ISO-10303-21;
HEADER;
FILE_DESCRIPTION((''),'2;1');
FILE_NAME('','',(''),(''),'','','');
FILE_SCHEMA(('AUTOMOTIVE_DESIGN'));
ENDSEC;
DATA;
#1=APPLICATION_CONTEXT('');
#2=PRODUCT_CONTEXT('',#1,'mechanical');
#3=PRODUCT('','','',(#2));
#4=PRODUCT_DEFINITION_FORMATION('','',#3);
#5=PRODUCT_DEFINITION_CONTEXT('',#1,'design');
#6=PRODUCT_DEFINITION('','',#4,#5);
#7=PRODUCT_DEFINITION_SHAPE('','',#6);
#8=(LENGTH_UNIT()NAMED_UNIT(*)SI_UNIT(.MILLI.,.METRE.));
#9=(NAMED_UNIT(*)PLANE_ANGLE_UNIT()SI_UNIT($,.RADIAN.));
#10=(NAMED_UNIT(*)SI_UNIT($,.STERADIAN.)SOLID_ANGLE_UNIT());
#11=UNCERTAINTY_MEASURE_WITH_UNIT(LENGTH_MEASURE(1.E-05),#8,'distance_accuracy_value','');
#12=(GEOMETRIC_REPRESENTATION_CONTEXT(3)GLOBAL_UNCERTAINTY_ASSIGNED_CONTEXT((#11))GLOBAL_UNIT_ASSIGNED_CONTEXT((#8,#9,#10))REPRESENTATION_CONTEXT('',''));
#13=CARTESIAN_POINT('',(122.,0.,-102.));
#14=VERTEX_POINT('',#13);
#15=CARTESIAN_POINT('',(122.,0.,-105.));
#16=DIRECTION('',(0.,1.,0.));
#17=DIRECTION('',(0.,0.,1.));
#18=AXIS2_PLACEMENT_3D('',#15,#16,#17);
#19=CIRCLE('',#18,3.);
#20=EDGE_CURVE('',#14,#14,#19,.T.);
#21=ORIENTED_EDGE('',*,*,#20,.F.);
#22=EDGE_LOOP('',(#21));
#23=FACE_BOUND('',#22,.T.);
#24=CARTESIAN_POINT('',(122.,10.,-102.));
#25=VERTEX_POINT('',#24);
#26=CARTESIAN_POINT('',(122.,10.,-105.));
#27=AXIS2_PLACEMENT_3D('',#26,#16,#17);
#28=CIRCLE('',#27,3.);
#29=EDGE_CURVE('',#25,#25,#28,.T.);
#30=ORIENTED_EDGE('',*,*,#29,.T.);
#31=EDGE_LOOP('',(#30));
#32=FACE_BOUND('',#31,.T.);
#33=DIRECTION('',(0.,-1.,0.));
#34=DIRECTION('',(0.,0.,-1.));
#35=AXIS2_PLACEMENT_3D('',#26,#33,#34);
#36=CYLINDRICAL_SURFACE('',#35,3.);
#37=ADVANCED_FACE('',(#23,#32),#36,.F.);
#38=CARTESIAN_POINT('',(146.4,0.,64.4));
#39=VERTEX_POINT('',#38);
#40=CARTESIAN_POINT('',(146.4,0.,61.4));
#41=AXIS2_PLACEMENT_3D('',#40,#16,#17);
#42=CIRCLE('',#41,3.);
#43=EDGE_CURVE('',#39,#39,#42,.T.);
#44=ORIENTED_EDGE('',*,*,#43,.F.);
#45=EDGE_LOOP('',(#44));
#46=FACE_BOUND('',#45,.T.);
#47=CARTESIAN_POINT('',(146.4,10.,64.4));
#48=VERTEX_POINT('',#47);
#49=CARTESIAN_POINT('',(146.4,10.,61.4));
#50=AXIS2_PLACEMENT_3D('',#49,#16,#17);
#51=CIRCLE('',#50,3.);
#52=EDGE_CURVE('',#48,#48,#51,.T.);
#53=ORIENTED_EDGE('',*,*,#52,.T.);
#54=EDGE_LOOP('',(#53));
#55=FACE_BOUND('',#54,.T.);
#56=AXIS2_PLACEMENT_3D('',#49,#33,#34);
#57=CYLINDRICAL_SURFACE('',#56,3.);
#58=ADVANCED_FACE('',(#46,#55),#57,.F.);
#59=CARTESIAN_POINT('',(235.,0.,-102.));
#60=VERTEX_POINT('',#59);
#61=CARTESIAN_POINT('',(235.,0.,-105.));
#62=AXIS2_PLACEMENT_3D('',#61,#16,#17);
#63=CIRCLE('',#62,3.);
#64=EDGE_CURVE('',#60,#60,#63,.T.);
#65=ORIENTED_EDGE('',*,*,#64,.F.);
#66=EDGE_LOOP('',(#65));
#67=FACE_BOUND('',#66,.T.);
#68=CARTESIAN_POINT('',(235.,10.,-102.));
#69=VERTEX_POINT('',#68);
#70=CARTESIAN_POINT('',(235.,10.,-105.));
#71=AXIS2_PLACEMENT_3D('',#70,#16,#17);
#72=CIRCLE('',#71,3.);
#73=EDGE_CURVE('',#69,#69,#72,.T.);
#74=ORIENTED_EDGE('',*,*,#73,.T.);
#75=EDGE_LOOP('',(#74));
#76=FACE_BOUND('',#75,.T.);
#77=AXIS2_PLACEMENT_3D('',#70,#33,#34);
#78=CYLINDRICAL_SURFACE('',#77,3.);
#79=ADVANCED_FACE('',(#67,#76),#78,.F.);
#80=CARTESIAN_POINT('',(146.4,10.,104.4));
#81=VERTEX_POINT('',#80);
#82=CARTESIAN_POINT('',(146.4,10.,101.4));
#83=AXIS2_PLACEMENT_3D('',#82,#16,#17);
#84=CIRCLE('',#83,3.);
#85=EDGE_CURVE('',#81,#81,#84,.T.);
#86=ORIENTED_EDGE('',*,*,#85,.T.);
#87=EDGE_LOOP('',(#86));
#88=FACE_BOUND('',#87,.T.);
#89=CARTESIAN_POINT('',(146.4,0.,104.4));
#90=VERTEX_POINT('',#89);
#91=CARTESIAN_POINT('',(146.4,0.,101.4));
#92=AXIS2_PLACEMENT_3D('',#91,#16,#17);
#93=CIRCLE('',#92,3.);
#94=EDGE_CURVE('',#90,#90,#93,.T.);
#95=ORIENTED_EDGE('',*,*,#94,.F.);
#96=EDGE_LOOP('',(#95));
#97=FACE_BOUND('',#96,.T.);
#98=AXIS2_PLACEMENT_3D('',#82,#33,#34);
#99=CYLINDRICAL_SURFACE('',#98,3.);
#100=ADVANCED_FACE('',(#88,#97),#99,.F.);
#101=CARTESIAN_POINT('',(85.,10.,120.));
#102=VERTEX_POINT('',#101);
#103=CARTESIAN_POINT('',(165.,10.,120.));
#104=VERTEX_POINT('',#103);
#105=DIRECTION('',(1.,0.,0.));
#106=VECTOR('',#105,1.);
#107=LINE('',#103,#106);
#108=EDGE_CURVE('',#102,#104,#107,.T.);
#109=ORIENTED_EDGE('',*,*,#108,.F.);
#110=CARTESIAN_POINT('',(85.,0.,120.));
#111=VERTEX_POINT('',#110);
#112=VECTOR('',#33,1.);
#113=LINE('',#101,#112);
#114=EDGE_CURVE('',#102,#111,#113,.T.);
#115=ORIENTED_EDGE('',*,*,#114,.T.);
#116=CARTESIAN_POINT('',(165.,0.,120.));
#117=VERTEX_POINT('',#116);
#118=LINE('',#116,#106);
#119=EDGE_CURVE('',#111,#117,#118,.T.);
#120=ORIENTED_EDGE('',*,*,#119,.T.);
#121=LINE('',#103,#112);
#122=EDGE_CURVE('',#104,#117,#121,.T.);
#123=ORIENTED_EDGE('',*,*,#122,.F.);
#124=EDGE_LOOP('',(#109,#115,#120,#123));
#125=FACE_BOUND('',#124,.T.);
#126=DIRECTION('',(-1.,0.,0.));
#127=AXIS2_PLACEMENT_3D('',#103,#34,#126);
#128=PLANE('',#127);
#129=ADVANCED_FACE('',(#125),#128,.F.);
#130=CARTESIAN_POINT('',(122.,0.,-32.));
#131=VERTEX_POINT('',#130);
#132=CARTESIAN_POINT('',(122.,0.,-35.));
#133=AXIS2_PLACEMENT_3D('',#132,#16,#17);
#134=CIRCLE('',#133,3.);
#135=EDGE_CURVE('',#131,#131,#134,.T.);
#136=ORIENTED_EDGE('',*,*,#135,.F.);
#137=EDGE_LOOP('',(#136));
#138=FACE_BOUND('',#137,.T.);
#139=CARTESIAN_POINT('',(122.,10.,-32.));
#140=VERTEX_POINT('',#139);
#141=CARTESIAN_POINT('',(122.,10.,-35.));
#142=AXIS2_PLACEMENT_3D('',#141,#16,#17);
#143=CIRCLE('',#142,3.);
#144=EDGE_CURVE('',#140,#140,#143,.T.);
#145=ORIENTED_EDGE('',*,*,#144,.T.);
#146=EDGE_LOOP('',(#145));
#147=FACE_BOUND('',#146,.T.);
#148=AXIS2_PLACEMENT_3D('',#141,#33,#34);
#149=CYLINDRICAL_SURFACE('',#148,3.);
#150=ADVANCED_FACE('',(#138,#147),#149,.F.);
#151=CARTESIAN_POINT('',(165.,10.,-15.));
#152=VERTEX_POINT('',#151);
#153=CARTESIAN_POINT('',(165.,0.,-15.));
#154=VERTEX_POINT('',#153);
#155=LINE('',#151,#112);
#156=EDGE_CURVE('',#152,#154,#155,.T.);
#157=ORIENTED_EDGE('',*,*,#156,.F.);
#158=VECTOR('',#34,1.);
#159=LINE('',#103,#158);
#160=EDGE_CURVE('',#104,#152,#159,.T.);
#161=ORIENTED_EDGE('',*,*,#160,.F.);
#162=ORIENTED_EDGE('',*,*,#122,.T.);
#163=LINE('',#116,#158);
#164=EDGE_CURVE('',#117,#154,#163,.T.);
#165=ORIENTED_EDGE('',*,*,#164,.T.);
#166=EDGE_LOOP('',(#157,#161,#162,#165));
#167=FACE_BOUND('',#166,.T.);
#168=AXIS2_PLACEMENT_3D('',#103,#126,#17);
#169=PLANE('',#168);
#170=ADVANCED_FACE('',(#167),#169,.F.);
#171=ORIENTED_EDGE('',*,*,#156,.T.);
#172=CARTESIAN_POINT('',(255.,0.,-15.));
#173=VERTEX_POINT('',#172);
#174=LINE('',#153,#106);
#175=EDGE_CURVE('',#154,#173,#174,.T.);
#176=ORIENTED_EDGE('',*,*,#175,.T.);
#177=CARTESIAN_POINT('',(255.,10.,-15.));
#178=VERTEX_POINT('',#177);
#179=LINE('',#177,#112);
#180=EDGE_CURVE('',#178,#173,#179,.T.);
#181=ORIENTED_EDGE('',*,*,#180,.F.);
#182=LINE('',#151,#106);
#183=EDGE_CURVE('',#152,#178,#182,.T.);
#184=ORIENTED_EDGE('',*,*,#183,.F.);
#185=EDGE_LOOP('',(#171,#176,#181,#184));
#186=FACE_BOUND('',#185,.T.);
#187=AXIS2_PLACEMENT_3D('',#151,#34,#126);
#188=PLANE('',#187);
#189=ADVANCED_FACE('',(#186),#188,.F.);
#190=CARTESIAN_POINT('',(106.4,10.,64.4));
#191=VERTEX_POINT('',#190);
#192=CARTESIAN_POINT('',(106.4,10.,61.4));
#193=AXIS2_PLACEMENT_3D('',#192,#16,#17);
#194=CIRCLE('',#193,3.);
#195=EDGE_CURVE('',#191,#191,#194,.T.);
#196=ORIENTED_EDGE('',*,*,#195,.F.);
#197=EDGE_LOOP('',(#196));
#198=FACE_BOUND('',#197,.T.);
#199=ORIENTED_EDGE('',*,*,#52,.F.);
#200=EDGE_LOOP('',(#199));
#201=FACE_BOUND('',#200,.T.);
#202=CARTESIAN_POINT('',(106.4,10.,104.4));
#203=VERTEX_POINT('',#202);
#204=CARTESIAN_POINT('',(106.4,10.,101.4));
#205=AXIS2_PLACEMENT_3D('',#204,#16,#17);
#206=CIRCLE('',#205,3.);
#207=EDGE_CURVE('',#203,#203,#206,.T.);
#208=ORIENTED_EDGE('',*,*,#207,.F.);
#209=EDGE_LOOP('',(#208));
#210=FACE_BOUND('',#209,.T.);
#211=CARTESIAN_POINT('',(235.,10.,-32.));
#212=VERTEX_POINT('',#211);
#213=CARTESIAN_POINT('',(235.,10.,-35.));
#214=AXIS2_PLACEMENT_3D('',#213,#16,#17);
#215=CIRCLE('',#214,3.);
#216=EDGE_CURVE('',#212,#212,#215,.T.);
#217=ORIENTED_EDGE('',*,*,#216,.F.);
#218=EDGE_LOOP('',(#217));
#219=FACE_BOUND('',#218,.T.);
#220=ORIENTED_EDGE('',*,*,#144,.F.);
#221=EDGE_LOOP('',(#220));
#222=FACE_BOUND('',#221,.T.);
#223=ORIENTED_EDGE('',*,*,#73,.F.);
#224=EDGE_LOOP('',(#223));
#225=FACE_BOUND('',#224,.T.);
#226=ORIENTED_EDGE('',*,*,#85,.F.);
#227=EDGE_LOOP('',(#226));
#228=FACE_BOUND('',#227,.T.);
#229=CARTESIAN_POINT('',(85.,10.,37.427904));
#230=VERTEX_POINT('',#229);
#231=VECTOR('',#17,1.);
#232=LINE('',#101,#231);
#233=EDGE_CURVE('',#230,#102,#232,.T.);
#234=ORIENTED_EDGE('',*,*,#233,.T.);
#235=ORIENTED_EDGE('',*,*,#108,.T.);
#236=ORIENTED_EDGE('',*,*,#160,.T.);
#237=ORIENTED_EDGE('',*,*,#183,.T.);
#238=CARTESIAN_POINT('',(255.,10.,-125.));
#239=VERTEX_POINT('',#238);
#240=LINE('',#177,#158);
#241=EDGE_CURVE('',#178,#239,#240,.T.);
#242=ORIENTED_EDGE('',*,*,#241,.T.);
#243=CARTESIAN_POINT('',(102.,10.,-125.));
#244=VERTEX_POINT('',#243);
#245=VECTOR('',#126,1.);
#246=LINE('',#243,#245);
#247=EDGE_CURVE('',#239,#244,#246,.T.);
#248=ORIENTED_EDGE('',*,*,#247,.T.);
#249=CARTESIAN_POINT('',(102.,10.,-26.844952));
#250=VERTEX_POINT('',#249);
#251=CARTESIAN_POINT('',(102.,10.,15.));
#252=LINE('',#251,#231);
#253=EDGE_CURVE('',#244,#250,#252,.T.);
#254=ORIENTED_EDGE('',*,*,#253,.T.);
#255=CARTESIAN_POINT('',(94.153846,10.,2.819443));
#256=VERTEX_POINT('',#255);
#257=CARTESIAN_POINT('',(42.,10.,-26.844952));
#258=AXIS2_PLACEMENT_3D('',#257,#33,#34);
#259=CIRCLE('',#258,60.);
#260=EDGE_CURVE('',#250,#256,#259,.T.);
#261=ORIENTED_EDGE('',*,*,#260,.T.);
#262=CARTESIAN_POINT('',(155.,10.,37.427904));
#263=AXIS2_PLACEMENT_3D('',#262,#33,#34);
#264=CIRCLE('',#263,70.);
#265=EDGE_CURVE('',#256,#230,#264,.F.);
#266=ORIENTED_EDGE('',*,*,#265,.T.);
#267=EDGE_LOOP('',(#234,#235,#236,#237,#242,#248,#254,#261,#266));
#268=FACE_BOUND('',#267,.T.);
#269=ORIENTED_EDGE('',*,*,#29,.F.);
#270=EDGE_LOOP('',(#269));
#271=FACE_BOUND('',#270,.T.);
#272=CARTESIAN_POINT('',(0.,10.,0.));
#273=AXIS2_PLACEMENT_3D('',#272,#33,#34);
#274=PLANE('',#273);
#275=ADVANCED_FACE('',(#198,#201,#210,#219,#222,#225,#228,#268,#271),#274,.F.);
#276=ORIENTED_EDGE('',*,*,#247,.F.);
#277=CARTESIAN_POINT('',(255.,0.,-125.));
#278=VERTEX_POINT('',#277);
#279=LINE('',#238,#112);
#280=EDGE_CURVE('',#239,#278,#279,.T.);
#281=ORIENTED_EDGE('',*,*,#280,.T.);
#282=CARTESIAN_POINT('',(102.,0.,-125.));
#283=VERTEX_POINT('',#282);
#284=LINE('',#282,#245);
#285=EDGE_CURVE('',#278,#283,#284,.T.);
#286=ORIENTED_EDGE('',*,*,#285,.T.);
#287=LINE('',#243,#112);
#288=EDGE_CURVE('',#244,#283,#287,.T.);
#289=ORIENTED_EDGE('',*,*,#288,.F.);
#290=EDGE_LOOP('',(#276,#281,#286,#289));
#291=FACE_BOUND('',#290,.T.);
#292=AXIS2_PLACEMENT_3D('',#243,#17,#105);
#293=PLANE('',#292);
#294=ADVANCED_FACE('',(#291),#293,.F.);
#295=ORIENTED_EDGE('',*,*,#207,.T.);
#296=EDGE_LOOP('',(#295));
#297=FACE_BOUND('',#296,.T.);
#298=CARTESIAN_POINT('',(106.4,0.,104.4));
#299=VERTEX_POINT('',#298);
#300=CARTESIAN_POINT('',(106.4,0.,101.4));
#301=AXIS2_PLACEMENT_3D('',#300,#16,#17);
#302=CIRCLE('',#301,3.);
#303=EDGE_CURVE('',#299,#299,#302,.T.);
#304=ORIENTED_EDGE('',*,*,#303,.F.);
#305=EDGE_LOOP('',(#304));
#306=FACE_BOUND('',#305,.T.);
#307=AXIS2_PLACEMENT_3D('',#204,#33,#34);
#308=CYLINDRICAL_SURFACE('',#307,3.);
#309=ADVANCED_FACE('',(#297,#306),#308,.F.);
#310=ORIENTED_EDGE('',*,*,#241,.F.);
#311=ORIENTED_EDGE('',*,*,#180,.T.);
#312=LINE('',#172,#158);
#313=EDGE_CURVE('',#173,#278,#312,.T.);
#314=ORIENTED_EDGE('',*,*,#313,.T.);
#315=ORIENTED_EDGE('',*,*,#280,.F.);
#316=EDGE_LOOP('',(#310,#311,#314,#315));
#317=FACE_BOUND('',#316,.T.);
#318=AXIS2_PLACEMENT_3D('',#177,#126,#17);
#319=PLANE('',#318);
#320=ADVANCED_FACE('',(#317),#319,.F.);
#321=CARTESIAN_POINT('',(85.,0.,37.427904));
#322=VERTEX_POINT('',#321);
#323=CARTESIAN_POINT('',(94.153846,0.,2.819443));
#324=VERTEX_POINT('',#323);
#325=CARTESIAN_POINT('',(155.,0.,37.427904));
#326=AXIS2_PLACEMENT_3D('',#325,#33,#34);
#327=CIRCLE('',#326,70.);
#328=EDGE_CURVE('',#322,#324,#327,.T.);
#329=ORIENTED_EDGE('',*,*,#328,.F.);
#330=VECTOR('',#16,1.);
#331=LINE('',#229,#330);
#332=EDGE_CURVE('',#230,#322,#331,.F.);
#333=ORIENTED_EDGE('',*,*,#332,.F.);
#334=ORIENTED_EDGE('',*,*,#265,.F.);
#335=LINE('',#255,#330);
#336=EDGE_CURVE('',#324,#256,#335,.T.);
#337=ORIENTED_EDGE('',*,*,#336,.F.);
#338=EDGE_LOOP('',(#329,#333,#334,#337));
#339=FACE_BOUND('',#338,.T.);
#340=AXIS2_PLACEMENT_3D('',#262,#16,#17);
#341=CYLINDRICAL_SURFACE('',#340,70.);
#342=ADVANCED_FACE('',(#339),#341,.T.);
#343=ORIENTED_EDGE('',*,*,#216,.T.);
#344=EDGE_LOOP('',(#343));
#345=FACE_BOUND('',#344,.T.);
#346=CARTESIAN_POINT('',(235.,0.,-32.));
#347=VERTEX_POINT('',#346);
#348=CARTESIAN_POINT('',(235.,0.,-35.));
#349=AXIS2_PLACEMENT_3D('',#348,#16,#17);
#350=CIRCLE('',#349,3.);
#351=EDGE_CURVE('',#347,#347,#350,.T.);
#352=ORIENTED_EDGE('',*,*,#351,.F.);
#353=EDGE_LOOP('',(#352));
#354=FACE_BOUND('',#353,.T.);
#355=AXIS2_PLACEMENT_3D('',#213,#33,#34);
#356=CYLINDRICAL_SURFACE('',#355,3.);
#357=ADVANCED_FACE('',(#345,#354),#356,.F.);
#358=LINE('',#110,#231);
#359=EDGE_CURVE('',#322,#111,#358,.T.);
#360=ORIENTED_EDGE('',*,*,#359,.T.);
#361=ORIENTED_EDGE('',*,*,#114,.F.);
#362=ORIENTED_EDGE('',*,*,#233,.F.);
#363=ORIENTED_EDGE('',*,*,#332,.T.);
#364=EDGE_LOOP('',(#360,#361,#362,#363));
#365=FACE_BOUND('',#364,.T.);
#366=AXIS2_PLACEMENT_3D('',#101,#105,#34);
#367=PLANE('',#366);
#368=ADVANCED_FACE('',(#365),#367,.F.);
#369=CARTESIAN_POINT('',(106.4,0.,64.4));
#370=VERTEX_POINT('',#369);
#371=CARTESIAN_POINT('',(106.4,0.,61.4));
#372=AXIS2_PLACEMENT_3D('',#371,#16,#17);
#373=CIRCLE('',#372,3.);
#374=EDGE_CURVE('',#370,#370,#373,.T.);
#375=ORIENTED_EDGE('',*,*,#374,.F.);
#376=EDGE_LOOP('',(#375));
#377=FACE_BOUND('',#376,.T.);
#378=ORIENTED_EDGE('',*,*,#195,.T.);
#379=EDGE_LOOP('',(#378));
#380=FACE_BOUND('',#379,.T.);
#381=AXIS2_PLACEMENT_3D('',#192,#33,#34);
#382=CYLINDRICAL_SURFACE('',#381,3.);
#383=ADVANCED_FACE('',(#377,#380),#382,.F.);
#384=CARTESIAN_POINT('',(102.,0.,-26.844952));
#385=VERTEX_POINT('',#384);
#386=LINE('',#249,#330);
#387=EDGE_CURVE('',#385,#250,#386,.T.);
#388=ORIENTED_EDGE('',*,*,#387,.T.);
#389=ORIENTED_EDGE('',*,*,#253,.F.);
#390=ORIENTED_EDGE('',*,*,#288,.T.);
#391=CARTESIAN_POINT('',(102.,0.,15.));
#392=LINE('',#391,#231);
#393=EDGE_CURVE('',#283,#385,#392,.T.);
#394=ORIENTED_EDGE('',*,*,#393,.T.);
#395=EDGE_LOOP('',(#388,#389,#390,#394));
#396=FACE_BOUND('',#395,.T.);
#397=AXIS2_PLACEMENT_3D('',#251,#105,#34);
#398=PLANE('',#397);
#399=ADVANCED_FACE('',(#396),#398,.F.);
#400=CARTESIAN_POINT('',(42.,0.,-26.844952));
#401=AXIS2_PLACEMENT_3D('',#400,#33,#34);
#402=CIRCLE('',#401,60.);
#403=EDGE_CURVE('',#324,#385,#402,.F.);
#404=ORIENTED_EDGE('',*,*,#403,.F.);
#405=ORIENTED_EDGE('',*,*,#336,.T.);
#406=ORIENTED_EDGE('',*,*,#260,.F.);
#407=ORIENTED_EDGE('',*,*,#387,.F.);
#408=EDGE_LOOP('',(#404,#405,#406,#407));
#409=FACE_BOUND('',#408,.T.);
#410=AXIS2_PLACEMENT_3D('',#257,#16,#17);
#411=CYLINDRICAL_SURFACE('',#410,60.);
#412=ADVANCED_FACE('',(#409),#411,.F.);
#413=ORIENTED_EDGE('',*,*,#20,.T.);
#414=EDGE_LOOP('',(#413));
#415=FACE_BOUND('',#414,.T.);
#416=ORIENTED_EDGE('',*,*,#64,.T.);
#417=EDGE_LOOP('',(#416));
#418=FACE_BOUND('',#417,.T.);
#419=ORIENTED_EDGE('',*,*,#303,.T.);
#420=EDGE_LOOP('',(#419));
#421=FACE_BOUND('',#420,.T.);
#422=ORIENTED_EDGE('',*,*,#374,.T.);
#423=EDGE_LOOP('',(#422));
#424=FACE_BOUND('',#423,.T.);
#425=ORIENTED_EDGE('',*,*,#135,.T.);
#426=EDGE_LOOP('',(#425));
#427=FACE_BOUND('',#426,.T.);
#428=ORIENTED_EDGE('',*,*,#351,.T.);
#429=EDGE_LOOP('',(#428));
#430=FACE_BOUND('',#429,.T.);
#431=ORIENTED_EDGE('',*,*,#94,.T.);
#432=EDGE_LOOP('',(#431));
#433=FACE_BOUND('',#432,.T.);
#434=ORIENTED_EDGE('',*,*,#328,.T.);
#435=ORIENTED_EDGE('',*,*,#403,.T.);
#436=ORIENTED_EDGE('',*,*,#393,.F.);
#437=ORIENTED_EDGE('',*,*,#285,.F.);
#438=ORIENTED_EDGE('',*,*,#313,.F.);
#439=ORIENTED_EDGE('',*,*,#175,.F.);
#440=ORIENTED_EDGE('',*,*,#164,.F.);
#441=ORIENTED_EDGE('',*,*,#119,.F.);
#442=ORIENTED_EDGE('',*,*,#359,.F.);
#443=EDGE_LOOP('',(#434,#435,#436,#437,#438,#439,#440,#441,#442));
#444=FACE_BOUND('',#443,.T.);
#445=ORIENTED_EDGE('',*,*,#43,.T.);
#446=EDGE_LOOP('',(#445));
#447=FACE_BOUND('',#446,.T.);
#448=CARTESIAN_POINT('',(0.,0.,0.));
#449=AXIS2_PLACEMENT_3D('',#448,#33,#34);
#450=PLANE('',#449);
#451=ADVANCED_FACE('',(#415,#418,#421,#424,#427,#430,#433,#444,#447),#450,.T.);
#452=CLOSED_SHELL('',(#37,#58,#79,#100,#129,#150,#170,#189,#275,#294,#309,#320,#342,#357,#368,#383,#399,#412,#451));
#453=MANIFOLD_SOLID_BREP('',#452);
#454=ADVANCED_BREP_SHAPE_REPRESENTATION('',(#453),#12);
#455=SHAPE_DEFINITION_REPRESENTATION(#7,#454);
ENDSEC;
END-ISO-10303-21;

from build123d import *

# Parameters (mm, degrees)
SKETCH1_R           = 3
BOSS_EXTRUDE1_DEPTH = 10
FILLET2_R           = 60
FILLET3_R           = 70


with BuildPart() as part:
    # Sketch1 → Boss-Extrude1 (new body)
    with BuildSketch(Plane(origin=(0, 0, 0), x_dir=(1, 0, 0), z_dir=(0, 1, 0))):
        Polygon((165, -120), (85, -120), (85, -15), (102, -15), (102, 125), (255, 125), (255, 15), (165, 15), align=None)
        with Locations(Location((146.4, -101.4, 0), (0, 0, 270))):
            Circle(SKETCH1_R, mode=Mode.SUBTRACT)
        with Locations(Location((106.4, -101.4, 0), (0, 0, 270))):
            Circle(SKETCH1_R, mode=Mode.SUBTRACT)
        with Locations(Location((146.4, -61.4, 0), (0, 0, 270))):
            Circle(SKETCH1_R, mode=Mode.SUBTRACT)
        with Locations(Location((106.4, -61.4, 0), (0, 0, 270))):
            Circle(SKETCH1_R, mode=Mode.SUBTRACT)
        with Locations(Location((122, 35, 0), (0, 0, 270))):
            Circle(SKETCH1_R, mode=Mode.SUBTRACT)
        with Locations(Location((235, 35, 0), (0, 0, 270))):
            Circle(SKETCH1_R, mode=Mode.SUBTRACT)
        with Locations(Location((235, 105, 0), (0, 0, 270))):
            Circle(SKETCH1_R, mode=Mode.SUBTRACT)
        with Locations(Location((122, 105, 0), (0, 0, 270))):
            Circle(SKETCH1_R, mode=Mode.SUBTRACT)
    extrude(amount=BOSS_EXTRUDE1_DEPTH)

    # Fillet2
    # the kernel refuses this fillet: 60 mm, written as the material it adds along each edge
    with BuildSketch(Plane(origin=(102, 0, 15), x_dir=(-1, 0, 0), z_dir=(0, 1, 0))) as fillet2_piece_1:
        with BuildLine():
            CenterArc((60, -41.844951906), FILLET2_R, 135.779955572, 44.220044428)
            Line((0, -41.844951906), (-1.2, -41.844951906))
            Line((-1.2, -41.844951906), (-1.2, 0))
            Line((-1.2, 0), (0, 1.2))
            ThreePointArc((0, 1.2), (8.5, 1.2), (16.14, 0.836899038))
            Line((16.14, 0.836899038), (17, 0))
        make_face()
    extrude(amount=10)

    # Fillet3
    fillet3_edges = [part.edges().sort_by_distance(p)[0] for p in [
        (85, 5, 15),
    ]]
    fillet(fillet3_edges, radius=FILLET3_R)


solid = part.part
